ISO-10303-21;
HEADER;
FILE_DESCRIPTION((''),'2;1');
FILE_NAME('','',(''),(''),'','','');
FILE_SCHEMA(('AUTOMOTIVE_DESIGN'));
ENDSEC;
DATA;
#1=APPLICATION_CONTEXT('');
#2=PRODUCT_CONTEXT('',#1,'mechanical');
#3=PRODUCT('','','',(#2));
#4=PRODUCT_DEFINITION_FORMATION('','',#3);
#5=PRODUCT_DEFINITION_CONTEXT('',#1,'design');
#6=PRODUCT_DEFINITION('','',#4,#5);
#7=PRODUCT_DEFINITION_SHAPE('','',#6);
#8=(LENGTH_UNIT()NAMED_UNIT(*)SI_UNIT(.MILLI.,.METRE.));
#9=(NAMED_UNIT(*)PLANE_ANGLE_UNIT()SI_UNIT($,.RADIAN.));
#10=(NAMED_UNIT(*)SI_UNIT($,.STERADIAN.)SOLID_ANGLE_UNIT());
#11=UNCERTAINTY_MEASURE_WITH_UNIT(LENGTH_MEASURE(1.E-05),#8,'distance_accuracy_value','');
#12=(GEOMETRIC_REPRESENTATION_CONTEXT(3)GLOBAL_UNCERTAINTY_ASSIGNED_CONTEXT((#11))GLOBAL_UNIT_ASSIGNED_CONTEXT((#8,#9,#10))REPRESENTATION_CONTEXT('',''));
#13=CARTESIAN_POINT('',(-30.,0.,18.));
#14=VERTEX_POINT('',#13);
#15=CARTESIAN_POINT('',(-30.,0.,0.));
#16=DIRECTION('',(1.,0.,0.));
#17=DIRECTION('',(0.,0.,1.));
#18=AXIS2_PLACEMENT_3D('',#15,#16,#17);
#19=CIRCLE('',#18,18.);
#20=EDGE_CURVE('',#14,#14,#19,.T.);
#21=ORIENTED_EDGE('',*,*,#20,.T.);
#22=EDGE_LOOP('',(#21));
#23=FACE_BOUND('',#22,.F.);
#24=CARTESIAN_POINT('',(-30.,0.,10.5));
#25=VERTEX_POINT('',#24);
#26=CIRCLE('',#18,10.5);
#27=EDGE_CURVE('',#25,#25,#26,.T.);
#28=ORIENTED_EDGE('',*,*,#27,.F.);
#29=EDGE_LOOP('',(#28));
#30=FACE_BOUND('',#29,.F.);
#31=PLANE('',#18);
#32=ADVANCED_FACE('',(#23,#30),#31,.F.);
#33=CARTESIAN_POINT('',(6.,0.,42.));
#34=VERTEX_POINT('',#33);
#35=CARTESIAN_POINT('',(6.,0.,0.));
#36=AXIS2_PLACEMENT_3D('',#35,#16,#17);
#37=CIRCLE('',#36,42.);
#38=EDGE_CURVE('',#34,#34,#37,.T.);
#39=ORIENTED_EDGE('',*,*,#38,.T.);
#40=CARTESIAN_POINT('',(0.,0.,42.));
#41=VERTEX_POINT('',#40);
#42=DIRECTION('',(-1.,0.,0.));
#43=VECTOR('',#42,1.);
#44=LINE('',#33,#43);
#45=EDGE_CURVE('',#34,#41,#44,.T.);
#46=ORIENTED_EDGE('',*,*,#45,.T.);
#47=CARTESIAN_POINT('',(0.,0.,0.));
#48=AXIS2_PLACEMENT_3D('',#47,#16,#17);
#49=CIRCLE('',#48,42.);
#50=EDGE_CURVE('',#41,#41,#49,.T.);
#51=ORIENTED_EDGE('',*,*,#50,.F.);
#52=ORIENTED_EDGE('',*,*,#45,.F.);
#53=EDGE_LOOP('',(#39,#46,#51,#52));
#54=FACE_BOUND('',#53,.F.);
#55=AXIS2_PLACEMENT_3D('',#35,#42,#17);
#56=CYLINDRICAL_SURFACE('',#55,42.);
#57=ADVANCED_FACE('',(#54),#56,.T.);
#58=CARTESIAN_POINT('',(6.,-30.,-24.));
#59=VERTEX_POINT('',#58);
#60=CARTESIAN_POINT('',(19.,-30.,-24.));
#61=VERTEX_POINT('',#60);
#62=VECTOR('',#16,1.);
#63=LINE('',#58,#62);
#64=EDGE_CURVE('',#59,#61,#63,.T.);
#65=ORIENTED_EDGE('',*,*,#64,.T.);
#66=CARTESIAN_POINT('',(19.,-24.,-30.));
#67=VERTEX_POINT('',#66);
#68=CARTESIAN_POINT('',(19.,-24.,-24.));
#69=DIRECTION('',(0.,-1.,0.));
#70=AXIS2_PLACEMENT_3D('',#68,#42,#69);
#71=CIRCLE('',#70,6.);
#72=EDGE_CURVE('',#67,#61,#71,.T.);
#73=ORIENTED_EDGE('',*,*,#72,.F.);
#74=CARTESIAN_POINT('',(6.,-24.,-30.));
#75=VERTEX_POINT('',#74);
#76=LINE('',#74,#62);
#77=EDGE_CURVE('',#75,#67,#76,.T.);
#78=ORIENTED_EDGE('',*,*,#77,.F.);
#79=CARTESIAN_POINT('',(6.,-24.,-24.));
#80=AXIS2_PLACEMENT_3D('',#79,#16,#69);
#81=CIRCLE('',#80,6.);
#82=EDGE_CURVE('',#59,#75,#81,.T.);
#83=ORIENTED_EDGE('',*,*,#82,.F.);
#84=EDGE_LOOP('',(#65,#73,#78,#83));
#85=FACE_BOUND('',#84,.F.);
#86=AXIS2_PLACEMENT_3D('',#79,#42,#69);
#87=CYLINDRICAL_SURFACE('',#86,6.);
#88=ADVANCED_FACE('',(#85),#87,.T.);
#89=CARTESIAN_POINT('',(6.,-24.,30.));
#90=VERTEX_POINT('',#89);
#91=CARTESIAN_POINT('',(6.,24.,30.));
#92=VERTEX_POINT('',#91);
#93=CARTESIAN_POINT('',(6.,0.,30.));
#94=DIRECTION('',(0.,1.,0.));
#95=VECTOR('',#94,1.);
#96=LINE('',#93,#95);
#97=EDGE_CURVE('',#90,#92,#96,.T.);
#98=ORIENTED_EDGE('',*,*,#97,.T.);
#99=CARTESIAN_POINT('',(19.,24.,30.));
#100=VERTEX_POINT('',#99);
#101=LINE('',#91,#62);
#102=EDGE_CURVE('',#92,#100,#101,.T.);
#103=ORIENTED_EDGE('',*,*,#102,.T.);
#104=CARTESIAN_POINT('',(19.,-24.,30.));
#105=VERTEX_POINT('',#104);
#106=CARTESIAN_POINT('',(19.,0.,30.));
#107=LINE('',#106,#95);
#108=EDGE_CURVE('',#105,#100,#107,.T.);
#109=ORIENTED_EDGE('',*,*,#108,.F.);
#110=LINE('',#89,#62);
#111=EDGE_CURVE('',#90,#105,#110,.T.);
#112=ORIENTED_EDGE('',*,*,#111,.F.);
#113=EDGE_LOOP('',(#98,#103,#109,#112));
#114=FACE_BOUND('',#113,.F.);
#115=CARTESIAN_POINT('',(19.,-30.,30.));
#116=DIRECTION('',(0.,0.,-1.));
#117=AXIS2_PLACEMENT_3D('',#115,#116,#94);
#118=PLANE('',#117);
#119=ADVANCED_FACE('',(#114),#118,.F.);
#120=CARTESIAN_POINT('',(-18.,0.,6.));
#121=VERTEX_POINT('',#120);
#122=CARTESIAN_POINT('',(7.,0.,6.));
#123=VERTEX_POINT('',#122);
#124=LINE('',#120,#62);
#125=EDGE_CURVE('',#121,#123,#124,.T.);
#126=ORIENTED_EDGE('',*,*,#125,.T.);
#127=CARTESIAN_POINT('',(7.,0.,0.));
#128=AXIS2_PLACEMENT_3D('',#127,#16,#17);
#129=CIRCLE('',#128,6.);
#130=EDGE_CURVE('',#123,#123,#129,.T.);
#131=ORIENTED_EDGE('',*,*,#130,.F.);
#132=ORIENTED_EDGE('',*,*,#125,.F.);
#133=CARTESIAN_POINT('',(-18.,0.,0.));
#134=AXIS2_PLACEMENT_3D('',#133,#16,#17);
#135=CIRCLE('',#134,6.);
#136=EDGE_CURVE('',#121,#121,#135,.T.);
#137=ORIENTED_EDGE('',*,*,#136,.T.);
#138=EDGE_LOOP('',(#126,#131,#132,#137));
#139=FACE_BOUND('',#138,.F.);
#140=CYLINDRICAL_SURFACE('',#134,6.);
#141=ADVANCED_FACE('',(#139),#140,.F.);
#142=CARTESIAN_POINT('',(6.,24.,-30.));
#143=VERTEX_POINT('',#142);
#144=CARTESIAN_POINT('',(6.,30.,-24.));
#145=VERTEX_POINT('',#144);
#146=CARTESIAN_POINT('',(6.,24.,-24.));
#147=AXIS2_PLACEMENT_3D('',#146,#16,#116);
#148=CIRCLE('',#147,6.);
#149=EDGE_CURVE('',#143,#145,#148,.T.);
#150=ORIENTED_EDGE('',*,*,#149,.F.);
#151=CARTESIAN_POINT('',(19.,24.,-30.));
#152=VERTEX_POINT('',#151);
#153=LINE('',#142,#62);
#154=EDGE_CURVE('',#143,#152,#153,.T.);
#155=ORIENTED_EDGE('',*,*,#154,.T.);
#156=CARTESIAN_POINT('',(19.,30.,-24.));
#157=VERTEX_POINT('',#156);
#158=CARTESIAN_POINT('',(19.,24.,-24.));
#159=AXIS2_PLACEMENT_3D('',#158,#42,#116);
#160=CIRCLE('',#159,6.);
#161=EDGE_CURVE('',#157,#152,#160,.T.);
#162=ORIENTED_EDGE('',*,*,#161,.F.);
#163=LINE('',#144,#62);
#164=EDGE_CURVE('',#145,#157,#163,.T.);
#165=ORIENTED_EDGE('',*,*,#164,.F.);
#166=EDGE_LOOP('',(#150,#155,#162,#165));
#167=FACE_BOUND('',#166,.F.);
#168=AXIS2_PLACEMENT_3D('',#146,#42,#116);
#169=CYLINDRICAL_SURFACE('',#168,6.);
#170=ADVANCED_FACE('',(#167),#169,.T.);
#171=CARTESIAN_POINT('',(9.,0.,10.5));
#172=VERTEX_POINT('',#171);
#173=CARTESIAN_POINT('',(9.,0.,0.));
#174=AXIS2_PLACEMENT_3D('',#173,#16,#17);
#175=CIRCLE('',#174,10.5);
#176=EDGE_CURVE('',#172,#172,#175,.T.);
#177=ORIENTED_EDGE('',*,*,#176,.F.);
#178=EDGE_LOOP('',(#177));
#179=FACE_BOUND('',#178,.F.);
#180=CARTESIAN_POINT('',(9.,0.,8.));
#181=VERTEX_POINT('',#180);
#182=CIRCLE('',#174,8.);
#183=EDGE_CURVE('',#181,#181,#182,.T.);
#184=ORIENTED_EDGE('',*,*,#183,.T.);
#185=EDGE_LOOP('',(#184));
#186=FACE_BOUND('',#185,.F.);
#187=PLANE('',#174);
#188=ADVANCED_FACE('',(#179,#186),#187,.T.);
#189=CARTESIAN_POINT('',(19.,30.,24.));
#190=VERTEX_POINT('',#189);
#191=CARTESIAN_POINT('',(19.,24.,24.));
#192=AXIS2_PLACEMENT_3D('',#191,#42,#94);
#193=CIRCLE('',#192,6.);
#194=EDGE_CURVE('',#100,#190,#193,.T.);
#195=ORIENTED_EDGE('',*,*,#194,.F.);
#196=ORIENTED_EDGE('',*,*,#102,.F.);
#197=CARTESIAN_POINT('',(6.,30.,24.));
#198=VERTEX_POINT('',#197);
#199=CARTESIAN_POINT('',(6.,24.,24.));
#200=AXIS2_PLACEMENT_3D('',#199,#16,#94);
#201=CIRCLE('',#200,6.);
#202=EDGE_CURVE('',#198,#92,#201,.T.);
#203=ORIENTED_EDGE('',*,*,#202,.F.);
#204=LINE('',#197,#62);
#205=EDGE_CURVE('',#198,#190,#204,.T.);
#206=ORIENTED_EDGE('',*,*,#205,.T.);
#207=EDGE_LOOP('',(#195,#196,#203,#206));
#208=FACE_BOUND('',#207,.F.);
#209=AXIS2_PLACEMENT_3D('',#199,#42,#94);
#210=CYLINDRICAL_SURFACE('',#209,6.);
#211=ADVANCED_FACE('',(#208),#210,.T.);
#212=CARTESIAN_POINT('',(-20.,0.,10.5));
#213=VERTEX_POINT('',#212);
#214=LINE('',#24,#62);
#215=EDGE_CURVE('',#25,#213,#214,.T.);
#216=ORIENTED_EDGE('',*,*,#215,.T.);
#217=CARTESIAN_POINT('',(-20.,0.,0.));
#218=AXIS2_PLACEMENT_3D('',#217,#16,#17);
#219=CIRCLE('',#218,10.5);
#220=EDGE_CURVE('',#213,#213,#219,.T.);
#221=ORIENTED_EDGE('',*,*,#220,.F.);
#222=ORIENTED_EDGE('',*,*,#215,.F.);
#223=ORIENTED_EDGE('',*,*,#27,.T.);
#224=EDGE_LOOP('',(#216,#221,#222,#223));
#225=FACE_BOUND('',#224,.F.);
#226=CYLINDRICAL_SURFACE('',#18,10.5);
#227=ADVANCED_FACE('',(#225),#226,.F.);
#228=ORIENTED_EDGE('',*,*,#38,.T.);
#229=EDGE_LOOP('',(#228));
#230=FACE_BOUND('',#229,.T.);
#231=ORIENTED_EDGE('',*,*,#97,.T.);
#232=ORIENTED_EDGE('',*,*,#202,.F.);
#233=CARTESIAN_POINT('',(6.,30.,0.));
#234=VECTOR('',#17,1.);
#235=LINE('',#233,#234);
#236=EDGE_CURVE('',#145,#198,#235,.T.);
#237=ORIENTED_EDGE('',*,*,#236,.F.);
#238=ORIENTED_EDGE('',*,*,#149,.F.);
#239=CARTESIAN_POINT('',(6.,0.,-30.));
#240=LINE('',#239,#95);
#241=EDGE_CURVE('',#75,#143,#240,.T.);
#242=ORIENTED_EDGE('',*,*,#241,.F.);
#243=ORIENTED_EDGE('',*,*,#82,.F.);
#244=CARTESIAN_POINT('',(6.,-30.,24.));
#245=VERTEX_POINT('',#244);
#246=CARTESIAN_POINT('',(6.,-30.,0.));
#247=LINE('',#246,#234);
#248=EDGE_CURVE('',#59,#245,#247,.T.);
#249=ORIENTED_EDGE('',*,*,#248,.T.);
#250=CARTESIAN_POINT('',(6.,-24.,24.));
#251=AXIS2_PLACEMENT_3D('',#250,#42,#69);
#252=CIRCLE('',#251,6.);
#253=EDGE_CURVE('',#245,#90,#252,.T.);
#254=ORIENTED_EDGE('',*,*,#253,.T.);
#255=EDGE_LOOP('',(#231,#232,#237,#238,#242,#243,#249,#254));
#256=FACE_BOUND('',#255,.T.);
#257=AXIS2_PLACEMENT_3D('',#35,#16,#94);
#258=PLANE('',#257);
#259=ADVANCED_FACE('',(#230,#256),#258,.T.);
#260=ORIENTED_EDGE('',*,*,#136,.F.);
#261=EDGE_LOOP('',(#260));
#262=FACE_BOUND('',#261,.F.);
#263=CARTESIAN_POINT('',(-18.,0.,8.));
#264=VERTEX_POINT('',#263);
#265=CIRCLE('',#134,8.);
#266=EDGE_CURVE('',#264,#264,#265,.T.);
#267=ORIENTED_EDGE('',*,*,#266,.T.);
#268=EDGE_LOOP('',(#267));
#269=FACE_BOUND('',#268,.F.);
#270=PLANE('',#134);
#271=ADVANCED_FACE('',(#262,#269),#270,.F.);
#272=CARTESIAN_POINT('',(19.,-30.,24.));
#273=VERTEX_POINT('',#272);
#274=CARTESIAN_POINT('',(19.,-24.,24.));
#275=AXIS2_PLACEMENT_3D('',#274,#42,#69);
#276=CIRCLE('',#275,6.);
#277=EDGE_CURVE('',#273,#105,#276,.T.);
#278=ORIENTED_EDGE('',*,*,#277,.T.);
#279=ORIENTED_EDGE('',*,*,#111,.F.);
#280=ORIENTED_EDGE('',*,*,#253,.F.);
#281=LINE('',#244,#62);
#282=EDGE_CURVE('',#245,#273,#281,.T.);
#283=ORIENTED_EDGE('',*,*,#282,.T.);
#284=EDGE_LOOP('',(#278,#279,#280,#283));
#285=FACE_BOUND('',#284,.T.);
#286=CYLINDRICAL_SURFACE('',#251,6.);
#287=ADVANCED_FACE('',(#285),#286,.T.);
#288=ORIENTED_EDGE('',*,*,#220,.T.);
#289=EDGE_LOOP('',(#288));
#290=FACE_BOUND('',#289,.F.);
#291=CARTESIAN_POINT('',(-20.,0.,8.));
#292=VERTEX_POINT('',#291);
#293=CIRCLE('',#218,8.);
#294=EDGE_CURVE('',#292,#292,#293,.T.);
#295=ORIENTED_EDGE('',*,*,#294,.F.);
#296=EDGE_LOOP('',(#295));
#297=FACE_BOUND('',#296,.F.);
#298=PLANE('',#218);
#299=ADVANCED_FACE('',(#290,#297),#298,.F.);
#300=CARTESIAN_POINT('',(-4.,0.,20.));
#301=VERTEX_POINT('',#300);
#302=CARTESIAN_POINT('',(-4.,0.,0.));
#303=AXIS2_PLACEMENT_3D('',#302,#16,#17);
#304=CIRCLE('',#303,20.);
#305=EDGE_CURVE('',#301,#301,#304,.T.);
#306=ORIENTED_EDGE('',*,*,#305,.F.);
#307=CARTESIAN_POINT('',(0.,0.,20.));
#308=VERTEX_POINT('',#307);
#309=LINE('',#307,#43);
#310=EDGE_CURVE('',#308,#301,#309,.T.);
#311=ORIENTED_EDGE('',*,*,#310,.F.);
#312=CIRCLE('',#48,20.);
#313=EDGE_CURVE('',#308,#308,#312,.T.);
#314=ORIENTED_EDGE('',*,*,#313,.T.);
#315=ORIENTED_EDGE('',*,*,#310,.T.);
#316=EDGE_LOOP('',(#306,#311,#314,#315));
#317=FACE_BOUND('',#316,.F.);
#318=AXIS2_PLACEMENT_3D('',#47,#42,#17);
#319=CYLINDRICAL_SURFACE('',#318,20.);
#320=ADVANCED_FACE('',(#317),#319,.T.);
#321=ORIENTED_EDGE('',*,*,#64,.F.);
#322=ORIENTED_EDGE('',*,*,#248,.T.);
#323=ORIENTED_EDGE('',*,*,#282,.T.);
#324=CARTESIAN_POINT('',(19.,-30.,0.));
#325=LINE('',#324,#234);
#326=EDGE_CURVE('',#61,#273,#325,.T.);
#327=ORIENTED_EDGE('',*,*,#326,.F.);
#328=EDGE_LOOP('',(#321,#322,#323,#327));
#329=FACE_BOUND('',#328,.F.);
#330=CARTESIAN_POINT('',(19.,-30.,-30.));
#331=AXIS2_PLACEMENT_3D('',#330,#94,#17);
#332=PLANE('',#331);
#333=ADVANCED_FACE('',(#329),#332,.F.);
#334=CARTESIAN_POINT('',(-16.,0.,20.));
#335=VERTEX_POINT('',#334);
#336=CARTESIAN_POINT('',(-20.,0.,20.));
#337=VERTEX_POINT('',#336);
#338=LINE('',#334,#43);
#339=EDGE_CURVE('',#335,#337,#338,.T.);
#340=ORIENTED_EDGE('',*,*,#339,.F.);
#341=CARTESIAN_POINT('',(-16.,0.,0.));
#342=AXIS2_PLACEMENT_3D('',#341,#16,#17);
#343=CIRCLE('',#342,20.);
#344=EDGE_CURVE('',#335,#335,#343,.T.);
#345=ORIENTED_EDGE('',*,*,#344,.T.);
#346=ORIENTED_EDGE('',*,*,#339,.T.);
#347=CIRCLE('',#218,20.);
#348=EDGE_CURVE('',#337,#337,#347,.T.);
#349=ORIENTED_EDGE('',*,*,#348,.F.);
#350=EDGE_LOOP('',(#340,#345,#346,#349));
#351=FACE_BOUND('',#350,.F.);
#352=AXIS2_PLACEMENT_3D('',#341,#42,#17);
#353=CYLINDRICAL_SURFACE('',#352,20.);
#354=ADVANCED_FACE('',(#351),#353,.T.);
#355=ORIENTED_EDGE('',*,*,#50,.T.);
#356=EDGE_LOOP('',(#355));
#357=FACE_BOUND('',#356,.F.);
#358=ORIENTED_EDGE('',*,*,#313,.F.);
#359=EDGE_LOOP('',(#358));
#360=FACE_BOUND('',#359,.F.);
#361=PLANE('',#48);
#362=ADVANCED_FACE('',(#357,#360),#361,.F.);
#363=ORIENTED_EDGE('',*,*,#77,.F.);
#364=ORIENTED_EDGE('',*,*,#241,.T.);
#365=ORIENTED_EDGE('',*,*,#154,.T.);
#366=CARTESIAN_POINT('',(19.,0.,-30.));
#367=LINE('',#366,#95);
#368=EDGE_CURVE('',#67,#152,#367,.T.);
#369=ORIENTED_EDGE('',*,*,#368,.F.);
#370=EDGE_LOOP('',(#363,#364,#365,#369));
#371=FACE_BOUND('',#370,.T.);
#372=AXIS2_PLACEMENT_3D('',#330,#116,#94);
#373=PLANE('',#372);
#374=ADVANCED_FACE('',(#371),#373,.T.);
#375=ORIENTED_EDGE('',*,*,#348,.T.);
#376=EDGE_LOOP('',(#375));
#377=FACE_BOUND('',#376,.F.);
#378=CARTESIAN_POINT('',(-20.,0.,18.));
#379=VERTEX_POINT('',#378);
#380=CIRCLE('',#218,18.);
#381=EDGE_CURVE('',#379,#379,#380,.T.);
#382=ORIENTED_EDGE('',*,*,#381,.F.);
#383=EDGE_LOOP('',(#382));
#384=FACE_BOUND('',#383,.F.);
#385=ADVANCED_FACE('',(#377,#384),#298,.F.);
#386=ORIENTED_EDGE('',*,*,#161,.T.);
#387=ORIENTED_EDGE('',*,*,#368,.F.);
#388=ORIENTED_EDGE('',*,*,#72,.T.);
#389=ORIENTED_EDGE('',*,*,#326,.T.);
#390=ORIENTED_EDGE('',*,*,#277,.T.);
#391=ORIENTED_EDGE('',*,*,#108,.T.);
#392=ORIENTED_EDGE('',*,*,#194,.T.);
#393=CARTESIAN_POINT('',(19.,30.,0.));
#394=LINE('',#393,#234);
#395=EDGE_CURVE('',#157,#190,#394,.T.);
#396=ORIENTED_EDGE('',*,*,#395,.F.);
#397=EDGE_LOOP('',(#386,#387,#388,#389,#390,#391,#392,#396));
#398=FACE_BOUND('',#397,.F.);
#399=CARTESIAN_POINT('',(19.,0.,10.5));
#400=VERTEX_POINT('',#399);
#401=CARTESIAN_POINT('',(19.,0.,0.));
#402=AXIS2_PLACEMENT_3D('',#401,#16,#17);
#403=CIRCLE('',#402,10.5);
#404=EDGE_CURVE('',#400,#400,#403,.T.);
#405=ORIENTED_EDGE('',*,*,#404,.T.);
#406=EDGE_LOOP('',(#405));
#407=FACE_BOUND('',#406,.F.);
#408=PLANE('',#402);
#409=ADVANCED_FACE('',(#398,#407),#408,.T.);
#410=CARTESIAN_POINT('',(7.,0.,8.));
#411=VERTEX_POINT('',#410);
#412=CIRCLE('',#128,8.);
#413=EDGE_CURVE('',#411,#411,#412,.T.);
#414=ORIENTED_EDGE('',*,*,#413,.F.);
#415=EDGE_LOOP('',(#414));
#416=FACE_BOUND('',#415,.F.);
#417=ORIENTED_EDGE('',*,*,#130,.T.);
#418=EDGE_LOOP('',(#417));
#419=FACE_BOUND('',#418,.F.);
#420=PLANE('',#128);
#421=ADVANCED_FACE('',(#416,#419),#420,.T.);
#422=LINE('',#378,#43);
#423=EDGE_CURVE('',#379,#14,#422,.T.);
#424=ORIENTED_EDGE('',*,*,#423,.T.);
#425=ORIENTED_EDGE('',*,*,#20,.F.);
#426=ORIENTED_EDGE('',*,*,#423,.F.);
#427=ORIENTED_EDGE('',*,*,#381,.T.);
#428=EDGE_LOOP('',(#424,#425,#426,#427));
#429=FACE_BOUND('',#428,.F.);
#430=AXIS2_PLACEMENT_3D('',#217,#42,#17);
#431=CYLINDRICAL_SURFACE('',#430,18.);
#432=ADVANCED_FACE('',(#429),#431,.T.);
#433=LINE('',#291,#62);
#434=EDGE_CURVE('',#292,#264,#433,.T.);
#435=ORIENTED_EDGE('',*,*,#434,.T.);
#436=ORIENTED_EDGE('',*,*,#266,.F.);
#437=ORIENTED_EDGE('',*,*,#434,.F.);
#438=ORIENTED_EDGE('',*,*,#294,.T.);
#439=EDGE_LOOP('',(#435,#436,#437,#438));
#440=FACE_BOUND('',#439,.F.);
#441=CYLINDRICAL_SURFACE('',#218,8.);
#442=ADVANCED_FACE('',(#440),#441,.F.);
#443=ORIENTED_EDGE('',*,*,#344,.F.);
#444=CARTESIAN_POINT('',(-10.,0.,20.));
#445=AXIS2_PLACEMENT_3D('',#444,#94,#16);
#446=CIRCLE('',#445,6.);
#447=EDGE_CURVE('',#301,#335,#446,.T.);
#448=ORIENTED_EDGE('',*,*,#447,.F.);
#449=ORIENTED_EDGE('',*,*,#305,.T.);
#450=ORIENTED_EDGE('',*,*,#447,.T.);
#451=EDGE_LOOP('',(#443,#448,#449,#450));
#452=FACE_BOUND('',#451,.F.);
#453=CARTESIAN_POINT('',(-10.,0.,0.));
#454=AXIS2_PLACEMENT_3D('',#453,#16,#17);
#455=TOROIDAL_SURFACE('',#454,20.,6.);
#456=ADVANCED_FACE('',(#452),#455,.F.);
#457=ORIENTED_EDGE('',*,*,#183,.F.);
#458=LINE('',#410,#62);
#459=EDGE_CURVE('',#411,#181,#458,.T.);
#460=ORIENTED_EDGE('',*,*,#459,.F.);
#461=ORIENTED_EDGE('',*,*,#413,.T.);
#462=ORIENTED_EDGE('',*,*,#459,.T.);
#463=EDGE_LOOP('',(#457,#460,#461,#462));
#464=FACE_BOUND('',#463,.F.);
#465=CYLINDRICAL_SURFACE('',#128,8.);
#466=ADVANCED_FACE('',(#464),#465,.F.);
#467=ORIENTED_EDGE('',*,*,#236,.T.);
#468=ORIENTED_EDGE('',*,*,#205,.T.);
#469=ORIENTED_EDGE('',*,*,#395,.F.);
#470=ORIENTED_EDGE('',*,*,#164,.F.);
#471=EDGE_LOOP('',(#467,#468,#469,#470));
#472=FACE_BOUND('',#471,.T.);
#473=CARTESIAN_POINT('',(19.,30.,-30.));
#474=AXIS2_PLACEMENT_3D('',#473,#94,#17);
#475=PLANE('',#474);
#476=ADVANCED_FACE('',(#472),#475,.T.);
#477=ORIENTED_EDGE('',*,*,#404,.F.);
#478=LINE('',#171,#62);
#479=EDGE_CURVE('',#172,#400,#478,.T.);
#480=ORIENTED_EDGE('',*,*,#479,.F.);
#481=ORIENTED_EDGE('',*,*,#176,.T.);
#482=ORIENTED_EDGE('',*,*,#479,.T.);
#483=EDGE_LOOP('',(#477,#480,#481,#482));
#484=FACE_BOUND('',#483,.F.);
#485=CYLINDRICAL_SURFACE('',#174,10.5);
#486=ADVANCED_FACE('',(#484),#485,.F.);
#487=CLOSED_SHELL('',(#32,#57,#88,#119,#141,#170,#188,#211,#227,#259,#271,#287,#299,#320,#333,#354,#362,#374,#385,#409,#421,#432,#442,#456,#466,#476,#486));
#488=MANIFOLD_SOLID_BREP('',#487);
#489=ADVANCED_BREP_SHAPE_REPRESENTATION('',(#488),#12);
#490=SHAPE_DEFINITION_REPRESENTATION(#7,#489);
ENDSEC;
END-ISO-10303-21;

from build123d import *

# Parameters (mm, degrees)
F3_R        = 44
F3_W        = 60
F3_H        = 60
F4_DEPTH    = 13
F5_T1_DEPTH = 28


# Not quite as in the source:
# - a fillet or chamfer that OpenCascade refuses, or shapes differently, is made with other operations: its cross-section is extruded or revolved along the edge and cut away or added


with BuildPart() as f2:
    # F1 (on Front) → F2 (revolve)
    with BuildSketch(Plane.XZ):
        with BuildLine():
            Line((-18, 6), (0, 6))
            Line((0, 6), (7, 6))
            Line((7, 6), (7, 8))
            Line((7, 8), (9, 8))
            Line((9, 8), (9, 10.5))
            Line((9, 10.5), (19, 10.5))
            Line((19, 10.5), (19, 44))
            Line((19, 44), (6, 44))
            Line((6, 44), (6, 42))
            Line((6, 42), (0, 42))
            Line((0, 42), (0, 20))
            Line((0, 20), (-4, 20))
            ThreePointArc((-4, 20), (-10, 14), (-16, 20))
            Line((-16, 20), (-20, 20))
            Line((-20, 20), (-20, 18))
            Line((-20, 18), (-30, 18))
            Line((-30, 18), (-30, 10.5))
            Line((-30, 10.5), (-20, 10.5))
            Line((-20, 10.5), (-20, 8))
            Line((-20, 8), (-18, 8))
            Line((-18, 8), (-18, 6))
        make_face()
    revolve(axis=Axis((43.6499677598, 0, 0), (1, 0, 0)))

    # F3 (on face) → F4 (cut, through all)
    with BuildSketch(Plane.YZ.offset(19)):
        Circle(F3_R)
        Rectangle(F3_W, F3_H, mode=Mode.SUBTRACT)
    extrude(amount=-F4_DEPTH, mode=Mode.SUBTRACT)

    # F5: fillet of radius 6 on 4 edges, made by hand

    # F5_s2 → F5_t1 (cut)
    with BuildSketch(Plane.YZ.offset(6)):
        with BuildLine():
            ThreePointArc((-30, -24), (-28.2426406871, -28.2426406871), (-24, -30))
            Line((-24, -30), (-30, -30))
            Line((-30, -30), (-30, -24))
        make_face()
        with BuildLine():
            ThreePointArc((24, -30), (28.2426406871, -28.2426406871), (30, -24))
            Line((30, -24), (30, -30))
            Line((30, -30), (24, -30))
        make_face()
        with BuildLine():
            ThreePointArc((-30, 24), (-28.2426406871, 28.2426406871), (-24, 30))
            Line((-24, 30), (-30, 30))
            Line((-30, 30), (-30, 24))
        make_face()
        with BuildLine():
            ThreePointArc((30, 24), (28.2426406871, 28.2426406871), (24, 30))
            Line((24, 30), (30, 30))
            Line((30, 30), (30, 24))
        make_face()
    extrude(amount=F5_T1_DEPTH, mode=Mode.SUBTRACT)


solid = f2.part
